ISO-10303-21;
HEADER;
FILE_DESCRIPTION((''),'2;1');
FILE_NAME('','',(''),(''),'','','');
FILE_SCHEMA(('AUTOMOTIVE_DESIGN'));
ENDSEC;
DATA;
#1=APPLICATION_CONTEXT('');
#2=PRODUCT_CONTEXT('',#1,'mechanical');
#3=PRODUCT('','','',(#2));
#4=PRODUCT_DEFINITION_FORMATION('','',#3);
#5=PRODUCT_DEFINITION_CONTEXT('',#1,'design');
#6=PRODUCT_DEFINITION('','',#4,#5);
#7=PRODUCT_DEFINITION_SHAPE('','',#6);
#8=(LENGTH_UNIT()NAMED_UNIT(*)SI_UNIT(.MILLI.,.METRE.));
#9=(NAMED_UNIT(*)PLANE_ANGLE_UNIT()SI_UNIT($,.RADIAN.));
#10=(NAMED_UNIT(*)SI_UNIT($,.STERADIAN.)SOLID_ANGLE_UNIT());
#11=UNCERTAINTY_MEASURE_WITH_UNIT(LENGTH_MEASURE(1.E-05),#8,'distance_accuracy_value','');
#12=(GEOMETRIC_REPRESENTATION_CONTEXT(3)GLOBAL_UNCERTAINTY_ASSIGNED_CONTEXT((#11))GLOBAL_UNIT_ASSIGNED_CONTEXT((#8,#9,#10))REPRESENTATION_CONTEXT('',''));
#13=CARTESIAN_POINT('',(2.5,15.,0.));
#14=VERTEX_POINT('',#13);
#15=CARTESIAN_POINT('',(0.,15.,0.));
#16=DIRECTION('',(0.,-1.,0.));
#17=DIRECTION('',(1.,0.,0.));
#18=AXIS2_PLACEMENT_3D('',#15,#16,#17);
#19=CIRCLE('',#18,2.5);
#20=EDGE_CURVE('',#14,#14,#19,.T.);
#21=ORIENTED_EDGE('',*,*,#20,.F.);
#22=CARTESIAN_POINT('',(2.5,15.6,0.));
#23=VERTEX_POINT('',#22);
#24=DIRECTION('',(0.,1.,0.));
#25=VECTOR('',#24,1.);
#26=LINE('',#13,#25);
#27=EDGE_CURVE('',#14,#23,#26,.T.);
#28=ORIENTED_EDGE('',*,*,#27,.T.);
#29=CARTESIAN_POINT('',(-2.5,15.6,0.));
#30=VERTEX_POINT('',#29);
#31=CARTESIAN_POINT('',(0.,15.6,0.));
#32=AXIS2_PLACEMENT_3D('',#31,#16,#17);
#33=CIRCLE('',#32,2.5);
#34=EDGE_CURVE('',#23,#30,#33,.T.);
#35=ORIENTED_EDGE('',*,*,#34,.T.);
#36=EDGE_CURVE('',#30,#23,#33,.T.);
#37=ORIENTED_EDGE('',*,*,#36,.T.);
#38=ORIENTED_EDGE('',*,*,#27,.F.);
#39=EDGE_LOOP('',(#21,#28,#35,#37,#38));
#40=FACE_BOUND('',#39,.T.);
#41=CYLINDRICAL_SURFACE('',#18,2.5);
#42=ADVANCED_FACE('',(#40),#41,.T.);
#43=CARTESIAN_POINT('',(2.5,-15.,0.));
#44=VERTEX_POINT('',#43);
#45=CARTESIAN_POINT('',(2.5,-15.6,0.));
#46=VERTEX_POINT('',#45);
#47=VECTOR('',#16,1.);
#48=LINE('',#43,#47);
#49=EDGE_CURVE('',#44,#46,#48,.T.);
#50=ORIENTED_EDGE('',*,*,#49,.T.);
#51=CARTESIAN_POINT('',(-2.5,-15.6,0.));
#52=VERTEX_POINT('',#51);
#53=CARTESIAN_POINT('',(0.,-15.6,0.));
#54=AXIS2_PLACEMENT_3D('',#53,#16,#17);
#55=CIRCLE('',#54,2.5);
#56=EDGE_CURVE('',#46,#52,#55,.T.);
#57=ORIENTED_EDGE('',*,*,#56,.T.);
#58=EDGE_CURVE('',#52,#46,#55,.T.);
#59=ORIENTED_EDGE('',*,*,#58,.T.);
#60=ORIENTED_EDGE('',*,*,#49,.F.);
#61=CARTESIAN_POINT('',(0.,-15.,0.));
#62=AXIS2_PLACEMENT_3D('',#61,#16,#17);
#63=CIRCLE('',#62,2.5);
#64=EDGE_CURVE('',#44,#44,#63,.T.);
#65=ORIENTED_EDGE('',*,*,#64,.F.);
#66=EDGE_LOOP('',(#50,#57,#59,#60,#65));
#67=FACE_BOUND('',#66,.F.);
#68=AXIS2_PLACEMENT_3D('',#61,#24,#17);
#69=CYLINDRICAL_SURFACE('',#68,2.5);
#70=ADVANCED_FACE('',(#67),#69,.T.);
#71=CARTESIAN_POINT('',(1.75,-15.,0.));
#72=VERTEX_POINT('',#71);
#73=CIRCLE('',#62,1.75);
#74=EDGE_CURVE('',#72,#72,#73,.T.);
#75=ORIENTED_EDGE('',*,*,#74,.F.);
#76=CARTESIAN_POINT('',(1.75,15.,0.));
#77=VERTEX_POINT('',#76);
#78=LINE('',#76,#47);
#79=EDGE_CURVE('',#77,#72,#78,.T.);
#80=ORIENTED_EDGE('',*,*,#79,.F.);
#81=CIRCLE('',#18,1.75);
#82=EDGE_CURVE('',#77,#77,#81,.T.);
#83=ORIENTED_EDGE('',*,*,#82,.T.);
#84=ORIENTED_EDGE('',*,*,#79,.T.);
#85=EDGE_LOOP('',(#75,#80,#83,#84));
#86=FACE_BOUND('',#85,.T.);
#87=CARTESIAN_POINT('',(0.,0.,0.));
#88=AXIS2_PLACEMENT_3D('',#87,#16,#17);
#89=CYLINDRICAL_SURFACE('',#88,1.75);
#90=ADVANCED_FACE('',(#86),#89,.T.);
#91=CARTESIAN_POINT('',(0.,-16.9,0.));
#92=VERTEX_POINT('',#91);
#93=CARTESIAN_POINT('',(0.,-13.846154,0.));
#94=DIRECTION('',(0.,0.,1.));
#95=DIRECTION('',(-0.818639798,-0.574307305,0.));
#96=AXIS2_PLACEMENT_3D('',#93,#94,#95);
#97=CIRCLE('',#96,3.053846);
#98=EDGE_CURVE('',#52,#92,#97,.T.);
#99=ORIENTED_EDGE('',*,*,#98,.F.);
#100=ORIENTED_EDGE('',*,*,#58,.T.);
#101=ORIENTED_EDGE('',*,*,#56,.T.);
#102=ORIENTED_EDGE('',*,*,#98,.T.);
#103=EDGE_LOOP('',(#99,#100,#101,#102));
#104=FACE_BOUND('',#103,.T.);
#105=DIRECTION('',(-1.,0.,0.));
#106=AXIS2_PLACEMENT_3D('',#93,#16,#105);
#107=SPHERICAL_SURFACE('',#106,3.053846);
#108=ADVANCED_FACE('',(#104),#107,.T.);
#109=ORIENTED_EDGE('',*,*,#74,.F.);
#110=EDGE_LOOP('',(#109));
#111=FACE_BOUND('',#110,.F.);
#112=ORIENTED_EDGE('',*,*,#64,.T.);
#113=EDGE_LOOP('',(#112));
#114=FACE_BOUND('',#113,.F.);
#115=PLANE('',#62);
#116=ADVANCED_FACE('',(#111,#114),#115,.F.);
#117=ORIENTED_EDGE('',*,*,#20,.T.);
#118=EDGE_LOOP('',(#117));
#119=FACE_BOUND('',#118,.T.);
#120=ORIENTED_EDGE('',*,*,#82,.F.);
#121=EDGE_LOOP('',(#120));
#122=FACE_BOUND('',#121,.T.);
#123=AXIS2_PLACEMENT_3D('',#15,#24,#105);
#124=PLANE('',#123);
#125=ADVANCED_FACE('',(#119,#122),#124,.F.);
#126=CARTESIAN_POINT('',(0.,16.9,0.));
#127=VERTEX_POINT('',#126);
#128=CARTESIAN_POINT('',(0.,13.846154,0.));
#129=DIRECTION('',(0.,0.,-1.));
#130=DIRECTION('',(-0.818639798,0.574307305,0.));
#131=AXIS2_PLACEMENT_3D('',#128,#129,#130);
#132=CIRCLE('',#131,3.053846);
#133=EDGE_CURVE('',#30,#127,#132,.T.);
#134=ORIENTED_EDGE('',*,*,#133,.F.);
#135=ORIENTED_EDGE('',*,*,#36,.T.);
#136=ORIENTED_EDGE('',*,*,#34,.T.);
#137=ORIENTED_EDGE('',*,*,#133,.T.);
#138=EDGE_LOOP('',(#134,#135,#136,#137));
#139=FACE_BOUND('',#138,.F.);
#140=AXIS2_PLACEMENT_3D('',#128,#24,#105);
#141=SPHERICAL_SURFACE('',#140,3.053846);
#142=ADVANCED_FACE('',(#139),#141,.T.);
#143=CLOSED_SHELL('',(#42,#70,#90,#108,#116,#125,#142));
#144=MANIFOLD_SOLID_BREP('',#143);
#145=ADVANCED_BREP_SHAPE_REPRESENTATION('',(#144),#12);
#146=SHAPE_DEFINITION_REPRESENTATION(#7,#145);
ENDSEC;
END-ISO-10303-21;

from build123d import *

# Parameters (mm, degrees)
F0_R     = 1.75
F1_DEPTH = 15
F2_R     = 2.5
F2_R_2   = 1.75
F3_DEPTH = 0.6


# Not quite as in the source:
# - a pattern or mirror of a feature is missing from the dataset's text; its kind, count and spacing are read off the source's solid


with BuildPart() as f1:
    # F0 (on Front) → F1 (new body, symmetric)
    with BuildSketch(Plane.XZ):
        Circle(F0_R)
    extrude(amount=F1_DEPTH, both=True)

    # F2 (on face) → F3 (join)
    with BuildSketch(Plane.XZ.offset(15)):
        Circle(F2_R)
        Circle(F2_R_2, mode=Mode.SUBTRACT)
        Circle(F2_R_2)
    f3 = extrude(amount=F3_DEPTH)

    # F3_copies: F3 across plane
    add(f3.mirror(Plane.ZX))

    # F4 (on Top) → F5 (revolve)
    with BuildSketch(Plane.XY):
        with BuildLine():
            Line((0, -16.9), (0, -15.6))
            Line((0, -15.6), (-2.5, -15.6))
            ThreePointArc((-2.5, -15.6), (-1.4089002804, -16.5555774622), (0, -16.9))
        make_face()
    f5 = revolve(axis=Axis((0, -16.1810277431, 0), (0, -1, 0)))

    # F5_copies: F5 across plane
    add(f5.mirror(Plane.ZX))


solid = f1.part
